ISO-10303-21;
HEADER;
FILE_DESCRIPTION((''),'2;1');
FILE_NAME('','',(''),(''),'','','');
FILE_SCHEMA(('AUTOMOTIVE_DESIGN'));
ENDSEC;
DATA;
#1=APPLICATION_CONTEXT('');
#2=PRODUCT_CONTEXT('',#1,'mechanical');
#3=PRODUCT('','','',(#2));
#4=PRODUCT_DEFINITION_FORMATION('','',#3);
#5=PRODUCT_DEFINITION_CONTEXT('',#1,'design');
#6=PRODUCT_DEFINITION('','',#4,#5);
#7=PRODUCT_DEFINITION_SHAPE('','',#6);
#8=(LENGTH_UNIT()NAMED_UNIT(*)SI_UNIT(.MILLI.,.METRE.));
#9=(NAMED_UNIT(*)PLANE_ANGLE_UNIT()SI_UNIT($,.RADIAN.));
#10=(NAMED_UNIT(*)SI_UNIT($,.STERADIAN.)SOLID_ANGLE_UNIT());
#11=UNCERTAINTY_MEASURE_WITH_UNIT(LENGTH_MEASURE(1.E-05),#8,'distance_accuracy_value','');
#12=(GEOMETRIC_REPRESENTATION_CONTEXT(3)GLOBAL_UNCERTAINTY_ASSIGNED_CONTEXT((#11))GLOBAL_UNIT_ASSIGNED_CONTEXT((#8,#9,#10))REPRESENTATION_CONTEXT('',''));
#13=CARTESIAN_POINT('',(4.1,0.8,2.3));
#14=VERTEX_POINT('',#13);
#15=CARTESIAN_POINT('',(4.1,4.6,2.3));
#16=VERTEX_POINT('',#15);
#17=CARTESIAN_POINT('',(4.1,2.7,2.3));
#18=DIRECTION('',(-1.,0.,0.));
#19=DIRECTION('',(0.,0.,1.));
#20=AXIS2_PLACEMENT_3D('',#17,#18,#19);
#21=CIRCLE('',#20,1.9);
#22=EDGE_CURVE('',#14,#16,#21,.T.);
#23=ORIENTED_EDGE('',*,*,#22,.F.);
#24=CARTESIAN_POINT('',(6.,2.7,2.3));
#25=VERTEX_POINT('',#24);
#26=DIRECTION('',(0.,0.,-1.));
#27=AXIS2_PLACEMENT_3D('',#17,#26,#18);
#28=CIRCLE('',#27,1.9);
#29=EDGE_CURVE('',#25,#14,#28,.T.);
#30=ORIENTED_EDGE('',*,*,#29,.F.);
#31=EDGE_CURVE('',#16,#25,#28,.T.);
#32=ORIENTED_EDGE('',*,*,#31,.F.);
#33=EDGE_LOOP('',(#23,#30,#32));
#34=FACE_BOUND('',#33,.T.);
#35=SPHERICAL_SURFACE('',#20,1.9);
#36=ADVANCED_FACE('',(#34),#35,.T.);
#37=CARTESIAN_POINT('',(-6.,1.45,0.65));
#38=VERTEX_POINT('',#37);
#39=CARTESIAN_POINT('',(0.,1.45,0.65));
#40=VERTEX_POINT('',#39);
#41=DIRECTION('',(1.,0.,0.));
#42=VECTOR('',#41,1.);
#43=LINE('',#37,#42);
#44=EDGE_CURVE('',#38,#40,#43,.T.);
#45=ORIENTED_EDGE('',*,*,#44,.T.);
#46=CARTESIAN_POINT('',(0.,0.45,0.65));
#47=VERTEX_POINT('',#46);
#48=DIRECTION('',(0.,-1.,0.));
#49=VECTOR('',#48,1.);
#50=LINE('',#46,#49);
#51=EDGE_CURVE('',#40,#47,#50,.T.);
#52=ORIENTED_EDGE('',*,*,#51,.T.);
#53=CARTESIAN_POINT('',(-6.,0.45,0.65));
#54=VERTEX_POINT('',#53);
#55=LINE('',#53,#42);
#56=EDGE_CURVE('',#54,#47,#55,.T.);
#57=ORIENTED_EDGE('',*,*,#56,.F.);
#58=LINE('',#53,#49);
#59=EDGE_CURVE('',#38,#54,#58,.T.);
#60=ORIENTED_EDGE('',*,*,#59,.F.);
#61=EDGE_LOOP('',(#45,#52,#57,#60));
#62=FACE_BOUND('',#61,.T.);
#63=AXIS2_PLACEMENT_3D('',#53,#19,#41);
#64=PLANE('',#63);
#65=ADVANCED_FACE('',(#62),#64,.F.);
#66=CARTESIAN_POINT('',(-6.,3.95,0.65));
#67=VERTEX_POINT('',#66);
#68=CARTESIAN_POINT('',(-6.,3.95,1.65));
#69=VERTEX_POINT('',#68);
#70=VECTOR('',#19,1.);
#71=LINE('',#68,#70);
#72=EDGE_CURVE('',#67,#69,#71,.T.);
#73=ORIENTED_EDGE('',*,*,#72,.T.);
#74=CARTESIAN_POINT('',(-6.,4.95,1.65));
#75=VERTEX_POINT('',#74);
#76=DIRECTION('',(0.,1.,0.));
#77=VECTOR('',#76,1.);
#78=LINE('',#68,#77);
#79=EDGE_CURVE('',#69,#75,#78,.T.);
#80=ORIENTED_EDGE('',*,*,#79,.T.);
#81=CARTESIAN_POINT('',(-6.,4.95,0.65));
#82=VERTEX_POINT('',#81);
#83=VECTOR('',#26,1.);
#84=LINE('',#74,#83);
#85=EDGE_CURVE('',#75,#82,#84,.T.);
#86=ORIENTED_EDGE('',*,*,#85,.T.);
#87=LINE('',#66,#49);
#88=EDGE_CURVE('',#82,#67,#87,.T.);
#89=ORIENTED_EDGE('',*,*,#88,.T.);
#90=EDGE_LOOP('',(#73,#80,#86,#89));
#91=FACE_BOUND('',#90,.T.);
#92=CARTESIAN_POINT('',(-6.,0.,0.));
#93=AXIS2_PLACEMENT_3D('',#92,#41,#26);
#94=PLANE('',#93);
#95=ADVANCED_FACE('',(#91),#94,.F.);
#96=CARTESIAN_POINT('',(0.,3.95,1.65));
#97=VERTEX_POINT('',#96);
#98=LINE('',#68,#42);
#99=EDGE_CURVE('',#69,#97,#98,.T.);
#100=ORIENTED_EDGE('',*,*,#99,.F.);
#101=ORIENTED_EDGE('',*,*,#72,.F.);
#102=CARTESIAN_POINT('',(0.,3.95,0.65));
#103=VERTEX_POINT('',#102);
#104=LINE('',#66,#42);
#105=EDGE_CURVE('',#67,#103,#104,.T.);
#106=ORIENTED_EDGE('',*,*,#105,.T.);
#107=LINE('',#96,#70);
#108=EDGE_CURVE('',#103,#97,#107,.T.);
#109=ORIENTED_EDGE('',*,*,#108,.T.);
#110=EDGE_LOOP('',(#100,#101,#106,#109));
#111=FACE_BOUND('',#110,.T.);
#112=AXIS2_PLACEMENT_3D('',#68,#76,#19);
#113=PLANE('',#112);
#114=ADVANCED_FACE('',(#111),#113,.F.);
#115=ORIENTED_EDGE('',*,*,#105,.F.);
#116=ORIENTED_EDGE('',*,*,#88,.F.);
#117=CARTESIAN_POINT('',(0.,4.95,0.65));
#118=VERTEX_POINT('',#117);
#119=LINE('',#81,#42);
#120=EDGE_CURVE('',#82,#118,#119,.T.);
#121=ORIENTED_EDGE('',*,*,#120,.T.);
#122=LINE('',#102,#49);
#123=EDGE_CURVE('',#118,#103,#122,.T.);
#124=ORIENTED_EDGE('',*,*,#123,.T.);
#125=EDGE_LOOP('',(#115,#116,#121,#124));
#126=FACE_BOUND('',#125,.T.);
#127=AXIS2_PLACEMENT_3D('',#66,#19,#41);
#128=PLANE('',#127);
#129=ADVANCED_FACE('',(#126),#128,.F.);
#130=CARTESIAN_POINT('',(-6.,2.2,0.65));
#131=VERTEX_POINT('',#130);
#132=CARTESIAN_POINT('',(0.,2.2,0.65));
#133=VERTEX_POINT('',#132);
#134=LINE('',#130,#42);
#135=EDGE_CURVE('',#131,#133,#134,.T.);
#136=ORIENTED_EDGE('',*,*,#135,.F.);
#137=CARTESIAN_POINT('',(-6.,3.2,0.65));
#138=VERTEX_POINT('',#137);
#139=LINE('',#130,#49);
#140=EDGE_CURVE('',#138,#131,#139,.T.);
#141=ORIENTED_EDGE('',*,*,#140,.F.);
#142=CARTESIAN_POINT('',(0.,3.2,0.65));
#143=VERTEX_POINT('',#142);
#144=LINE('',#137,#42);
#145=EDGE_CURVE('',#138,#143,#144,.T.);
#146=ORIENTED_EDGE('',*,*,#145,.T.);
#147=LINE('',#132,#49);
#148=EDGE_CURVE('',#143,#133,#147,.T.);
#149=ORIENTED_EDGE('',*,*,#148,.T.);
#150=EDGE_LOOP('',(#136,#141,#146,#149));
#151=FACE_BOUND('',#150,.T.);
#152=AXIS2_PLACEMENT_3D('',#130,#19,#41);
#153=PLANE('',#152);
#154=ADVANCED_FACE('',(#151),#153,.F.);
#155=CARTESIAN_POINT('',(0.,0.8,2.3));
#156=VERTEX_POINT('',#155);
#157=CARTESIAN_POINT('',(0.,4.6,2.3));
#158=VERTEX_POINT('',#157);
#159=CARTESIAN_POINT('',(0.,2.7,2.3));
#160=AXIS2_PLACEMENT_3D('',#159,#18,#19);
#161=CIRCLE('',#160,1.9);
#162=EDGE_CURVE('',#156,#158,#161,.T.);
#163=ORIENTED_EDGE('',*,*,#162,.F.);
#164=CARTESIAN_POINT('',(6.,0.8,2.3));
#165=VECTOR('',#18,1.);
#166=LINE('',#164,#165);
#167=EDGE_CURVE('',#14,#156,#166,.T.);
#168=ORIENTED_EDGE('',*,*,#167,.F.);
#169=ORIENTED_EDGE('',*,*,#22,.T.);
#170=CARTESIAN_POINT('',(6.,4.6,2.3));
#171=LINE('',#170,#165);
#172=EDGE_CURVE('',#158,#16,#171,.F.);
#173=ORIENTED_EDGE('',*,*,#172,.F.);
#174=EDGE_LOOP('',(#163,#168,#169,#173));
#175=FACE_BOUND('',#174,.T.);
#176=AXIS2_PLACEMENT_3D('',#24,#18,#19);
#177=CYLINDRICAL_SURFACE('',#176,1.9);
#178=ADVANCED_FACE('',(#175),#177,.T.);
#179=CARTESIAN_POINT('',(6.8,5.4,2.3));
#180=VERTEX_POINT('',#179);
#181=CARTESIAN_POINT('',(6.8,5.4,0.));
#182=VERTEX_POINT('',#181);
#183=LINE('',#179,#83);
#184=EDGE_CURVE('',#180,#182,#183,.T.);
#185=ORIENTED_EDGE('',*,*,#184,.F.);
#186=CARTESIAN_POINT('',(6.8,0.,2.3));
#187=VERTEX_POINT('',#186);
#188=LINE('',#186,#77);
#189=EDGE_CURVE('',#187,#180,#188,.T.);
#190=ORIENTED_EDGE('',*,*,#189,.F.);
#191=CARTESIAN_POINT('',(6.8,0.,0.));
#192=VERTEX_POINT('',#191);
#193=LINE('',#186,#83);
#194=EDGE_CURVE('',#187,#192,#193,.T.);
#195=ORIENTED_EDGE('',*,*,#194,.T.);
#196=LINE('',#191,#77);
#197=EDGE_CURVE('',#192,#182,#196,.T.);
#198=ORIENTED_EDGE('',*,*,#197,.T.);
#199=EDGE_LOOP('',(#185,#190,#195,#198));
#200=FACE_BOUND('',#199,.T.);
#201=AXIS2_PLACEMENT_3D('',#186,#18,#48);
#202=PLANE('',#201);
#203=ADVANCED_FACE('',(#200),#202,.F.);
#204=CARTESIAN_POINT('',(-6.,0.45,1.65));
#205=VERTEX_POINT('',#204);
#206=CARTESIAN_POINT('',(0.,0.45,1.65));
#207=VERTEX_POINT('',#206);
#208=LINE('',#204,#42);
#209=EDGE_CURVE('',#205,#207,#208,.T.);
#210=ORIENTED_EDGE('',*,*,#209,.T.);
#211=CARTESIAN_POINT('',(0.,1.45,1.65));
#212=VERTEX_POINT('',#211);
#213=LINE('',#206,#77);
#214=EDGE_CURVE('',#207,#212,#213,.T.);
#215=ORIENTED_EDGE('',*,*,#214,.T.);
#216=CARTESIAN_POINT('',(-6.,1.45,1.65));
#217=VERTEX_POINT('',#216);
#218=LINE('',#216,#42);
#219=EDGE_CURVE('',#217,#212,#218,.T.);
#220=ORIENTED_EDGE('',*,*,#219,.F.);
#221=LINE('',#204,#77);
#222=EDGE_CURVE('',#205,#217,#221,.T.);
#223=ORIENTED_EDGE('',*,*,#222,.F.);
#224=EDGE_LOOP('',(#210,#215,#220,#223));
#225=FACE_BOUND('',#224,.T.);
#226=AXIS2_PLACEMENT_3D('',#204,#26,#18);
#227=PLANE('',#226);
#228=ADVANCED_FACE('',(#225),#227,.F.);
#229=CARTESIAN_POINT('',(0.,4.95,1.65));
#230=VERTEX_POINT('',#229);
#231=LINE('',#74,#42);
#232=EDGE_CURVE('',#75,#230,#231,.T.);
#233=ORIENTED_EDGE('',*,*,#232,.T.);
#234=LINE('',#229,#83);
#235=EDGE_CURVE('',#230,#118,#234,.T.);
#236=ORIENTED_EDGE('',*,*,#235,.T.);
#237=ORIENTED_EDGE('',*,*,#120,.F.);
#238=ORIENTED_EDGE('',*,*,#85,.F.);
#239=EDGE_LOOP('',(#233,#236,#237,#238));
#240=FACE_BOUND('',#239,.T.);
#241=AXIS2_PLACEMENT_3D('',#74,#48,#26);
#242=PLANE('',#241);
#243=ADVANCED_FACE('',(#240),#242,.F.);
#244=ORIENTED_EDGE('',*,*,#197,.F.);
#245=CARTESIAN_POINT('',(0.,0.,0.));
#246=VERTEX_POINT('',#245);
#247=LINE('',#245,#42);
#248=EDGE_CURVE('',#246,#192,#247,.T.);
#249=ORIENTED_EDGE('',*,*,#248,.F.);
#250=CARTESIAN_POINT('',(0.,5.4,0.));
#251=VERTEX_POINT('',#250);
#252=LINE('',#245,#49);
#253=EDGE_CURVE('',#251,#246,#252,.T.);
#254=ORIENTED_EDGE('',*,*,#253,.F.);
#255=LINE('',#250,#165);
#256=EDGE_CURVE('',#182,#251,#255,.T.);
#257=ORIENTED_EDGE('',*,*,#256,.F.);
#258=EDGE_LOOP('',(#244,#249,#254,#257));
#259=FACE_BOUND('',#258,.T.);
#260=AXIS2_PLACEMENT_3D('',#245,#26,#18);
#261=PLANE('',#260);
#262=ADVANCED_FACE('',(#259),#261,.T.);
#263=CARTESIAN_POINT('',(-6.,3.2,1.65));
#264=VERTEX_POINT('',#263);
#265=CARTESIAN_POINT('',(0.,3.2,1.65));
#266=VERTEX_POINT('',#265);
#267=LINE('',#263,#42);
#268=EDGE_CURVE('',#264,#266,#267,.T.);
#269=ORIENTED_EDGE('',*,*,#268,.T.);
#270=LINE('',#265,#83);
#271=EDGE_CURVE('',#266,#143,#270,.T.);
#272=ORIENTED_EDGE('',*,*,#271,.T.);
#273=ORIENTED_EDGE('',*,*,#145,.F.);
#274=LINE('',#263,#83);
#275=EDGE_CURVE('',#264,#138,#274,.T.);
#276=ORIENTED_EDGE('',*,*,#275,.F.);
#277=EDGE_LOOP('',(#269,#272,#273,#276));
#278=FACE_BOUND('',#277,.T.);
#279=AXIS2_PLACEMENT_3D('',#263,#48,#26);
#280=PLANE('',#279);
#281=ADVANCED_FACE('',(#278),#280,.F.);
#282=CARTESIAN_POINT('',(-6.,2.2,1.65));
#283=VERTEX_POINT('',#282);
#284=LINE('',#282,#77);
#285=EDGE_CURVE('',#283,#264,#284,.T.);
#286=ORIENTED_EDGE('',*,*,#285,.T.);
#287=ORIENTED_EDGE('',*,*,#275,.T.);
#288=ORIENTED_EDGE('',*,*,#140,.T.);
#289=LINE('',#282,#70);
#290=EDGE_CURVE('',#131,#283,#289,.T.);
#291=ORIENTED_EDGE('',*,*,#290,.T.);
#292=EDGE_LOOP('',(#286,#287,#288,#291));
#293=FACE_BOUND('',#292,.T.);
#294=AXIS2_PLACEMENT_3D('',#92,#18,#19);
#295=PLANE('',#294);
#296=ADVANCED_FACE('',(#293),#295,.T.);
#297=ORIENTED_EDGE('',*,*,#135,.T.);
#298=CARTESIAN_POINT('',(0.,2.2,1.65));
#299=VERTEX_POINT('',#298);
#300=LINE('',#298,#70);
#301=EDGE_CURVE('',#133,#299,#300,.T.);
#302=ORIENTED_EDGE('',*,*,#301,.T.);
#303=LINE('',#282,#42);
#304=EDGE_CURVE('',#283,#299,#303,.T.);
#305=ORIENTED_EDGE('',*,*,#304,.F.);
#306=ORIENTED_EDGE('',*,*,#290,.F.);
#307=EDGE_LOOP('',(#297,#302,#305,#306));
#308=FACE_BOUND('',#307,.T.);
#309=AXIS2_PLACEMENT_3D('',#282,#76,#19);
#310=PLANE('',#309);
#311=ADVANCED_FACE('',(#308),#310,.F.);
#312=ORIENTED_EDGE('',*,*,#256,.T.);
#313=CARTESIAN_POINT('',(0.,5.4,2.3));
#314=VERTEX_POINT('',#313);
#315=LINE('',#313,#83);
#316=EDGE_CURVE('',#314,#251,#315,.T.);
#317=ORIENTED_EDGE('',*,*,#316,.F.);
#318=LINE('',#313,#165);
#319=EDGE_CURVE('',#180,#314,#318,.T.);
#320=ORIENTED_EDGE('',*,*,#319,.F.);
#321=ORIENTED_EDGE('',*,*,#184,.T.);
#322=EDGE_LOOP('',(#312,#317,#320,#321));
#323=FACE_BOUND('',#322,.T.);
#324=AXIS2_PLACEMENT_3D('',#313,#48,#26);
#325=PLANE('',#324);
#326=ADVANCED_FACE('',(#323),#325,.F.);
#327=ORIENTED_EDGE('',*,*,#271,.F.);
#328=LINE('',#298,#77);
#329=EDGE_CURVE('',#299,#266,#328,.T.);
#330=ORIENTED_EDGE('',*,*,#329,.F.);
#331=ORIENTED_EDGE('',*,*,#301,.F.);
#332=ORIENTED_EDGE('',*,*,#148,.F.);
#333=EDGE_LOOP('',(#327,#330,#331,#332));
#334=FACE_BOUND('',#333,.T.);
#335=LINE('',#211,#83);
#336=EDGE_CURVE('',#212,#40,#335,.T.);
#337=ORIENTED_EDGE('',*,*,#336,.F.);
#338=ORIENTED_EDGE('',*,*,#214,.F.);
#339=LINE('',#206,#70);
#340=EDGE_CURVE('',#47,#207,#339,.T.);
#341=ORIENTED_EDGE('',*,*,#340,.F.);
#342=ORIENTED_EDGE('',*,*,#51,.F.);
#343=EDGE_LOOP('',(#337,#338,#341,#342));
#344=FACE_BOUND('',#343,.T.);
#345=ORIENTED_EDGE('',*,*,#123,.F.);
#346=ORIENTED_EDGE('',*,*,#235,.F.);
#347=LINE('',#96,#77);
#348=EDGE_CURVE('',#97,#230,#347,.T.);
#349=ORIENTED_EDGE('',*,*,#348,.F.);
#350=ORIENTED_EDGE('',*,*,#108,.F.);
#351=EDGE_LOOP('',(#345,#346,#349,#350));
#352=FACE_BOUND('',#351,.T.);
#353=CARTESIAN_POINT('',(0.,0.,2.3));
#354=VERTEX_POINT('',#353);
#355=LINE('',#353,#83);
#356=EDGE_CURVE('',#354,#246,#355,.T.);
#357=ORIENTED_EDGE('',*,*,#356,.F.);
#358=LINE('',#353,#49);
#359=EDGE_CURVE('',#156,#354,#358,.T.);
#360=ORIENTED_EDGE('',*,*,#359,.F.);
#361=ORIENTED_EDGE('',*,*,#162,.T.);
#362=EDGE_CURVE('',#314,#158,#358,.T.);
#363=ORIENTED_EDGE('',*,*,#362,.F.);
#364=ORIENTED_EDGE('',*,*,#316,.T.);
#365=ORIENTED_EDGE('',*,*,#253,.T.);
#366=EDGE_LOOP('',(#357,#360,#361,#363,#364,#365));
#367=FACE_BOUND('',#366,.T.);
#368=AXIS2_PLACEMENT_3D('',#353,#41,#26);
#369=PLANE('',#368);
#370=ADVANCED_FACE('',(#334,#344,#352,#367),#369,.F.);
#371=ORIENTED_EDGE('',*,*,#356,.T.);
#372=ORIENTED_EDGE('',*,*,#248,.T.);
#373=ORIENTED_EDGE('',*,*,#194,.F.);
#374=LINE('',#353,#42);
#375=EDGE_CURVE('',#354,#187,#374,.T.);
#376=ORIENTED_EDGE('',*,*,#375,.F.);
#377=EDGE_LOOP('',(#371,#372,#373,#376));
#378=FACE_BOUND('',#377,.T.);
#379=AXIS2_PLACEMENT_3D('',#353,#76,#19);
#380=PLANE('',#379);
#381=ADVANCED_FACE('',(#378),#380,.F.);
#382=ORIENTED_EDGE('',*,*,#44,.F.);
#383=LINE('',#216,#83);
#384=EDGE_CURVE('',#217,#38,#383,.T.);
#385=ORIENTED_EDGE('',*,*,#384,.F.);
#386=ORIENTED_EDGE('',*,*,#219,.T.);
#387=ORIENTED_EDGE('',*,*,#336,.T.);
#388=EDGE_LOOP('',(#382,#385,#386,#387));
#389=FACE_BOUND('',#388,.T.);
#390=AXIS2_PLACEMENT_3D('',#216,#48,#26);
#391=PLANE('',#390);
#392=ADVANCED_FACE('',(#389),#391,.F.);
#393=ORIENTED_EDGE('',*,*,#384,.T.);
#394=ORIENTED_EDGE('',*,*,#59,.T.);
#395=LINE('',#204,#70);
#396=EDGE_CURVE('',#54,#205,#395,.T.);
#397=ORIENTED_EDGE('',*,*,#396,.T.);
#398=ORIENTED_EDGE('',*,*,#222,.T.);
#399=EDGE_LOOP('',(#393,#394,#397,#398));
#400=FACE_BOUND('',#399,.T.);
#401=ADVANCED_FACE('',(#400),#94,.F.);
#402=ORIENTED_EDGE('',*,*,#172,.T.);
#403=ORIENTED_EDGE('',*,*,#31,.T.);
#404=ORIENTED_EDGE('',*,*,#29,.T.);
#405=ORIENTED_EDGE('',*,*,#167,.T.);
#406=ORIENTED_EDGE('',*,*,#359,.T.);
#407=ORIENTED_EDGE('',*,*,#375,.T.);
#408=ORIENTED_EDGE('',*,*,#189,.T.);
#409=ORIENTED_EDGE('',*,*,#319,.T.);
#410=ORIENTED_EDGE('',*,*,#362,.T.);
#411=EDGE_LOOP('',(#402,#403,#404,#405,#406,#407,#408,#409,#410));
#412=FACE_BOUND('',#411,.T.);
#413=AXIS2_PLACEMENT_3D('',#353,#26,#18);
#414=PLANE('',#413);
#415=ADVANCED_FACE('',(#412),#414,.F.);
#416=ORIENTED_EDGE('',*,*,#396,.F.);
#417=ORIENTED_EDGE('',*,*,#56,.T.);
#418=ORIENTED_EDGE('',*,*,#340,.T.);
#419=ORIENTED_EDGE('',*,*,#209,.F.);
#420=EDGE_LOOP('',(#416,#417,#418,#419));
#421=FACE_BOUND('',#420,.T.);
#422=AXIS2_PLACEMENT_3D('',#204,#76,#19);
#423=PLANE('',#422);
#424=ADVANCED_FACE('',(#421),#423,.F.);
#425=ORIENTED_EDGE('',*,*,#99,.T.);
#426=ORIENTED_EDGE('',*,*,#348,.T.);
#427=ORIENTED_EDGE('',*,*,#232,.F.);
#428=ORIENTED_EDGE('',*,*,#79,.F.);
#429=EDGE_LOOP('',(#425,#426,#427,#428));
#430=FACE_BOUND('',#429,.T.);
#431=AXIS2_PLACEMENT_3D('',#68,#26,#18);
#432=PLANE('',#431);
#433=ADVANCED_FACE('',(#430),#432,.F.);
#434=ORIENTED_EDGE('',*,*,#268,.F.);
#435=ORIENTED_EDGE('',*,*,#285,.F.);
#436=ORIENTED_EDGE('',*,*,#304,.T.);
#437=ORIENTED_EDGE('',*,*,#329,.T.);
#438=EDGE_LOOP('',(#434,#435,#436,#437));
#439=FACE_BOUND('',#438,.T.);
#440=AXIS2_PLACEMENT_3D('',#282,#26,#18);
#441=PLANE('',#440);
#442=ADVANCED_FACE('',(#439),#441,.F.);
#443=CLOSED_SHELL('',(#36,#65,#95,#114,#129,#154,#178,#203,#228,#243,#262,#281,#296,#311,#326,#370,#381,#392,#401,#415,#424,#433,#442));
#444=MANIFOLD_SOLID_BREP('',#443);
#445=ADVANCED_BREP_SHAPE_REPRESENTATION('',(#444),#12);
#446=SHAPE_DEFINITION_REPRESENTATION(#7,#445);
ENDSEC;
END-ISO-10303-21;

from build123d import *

# Parameters (mm, degrees)
ESQUISSE1_W        = 6.8
ESQUISSE1_H        = 5.4
BOSS_EXTRU_1_DEPTH = 2.3
ESQUISSE2_R        = 1.9
BOSS_EXTRU_2_DEPTH = 6
CONG_1_R           = 1.9
ESQUISSE3_W        = 1
ESQUISSE3_H        = 1
BOSS_EXTRU_3_DEPTH = 6


with BuildPart() as part:
    # Esquisse1 → Boss.-Extru.1 (new body)
    with BuildSketch(Plane.XY):
        with Locations((3.4, 2.7)):
            Rectangle(ESQUISSE1_W, ESQUISSE1_H)
    extrude(amount=BOSS_EXTRU_1_DEPTH)

    # Esquisse2 → Boss.-Extru.2 (add)
    with BuildSketch(Plane.ZY):
        with Locations((2.3, 2.7)):
            Circle(ESQUISSE2_R)
    extrude(amount=-BOSS_EXTRU_2_DEPTH)

    # Congé1
    cong_1_edges = [part.edges().sort_by_distance(p)[0] for p in [
        (6, 2.7, 4.2),
    ]]
    fillet(cong_1_edges, radius=CONG_1_R - 0.0001)  # a hair under: the kernel refuses the full size

    # Esquisse3 → Boss.-Extru.3 (add)
    with BuildSketch(Plane.ZY):
        with Locations((1.15, 4.45)):
            Rectangle(ESQUISSE3_W, ESQUISSE3_H)
        with Locations((1.15, 2.7)):
            Rectangle(ESQUISSE3_W, ESQUISSE3_H)
        with Locations((1.15, 0.95)):
            Rectangle(ESQUISSE3_W, ESQUISSE3_H)
    extrude(amount=BOSS_EXTRU_3_DEPTH)


solid = part.part
